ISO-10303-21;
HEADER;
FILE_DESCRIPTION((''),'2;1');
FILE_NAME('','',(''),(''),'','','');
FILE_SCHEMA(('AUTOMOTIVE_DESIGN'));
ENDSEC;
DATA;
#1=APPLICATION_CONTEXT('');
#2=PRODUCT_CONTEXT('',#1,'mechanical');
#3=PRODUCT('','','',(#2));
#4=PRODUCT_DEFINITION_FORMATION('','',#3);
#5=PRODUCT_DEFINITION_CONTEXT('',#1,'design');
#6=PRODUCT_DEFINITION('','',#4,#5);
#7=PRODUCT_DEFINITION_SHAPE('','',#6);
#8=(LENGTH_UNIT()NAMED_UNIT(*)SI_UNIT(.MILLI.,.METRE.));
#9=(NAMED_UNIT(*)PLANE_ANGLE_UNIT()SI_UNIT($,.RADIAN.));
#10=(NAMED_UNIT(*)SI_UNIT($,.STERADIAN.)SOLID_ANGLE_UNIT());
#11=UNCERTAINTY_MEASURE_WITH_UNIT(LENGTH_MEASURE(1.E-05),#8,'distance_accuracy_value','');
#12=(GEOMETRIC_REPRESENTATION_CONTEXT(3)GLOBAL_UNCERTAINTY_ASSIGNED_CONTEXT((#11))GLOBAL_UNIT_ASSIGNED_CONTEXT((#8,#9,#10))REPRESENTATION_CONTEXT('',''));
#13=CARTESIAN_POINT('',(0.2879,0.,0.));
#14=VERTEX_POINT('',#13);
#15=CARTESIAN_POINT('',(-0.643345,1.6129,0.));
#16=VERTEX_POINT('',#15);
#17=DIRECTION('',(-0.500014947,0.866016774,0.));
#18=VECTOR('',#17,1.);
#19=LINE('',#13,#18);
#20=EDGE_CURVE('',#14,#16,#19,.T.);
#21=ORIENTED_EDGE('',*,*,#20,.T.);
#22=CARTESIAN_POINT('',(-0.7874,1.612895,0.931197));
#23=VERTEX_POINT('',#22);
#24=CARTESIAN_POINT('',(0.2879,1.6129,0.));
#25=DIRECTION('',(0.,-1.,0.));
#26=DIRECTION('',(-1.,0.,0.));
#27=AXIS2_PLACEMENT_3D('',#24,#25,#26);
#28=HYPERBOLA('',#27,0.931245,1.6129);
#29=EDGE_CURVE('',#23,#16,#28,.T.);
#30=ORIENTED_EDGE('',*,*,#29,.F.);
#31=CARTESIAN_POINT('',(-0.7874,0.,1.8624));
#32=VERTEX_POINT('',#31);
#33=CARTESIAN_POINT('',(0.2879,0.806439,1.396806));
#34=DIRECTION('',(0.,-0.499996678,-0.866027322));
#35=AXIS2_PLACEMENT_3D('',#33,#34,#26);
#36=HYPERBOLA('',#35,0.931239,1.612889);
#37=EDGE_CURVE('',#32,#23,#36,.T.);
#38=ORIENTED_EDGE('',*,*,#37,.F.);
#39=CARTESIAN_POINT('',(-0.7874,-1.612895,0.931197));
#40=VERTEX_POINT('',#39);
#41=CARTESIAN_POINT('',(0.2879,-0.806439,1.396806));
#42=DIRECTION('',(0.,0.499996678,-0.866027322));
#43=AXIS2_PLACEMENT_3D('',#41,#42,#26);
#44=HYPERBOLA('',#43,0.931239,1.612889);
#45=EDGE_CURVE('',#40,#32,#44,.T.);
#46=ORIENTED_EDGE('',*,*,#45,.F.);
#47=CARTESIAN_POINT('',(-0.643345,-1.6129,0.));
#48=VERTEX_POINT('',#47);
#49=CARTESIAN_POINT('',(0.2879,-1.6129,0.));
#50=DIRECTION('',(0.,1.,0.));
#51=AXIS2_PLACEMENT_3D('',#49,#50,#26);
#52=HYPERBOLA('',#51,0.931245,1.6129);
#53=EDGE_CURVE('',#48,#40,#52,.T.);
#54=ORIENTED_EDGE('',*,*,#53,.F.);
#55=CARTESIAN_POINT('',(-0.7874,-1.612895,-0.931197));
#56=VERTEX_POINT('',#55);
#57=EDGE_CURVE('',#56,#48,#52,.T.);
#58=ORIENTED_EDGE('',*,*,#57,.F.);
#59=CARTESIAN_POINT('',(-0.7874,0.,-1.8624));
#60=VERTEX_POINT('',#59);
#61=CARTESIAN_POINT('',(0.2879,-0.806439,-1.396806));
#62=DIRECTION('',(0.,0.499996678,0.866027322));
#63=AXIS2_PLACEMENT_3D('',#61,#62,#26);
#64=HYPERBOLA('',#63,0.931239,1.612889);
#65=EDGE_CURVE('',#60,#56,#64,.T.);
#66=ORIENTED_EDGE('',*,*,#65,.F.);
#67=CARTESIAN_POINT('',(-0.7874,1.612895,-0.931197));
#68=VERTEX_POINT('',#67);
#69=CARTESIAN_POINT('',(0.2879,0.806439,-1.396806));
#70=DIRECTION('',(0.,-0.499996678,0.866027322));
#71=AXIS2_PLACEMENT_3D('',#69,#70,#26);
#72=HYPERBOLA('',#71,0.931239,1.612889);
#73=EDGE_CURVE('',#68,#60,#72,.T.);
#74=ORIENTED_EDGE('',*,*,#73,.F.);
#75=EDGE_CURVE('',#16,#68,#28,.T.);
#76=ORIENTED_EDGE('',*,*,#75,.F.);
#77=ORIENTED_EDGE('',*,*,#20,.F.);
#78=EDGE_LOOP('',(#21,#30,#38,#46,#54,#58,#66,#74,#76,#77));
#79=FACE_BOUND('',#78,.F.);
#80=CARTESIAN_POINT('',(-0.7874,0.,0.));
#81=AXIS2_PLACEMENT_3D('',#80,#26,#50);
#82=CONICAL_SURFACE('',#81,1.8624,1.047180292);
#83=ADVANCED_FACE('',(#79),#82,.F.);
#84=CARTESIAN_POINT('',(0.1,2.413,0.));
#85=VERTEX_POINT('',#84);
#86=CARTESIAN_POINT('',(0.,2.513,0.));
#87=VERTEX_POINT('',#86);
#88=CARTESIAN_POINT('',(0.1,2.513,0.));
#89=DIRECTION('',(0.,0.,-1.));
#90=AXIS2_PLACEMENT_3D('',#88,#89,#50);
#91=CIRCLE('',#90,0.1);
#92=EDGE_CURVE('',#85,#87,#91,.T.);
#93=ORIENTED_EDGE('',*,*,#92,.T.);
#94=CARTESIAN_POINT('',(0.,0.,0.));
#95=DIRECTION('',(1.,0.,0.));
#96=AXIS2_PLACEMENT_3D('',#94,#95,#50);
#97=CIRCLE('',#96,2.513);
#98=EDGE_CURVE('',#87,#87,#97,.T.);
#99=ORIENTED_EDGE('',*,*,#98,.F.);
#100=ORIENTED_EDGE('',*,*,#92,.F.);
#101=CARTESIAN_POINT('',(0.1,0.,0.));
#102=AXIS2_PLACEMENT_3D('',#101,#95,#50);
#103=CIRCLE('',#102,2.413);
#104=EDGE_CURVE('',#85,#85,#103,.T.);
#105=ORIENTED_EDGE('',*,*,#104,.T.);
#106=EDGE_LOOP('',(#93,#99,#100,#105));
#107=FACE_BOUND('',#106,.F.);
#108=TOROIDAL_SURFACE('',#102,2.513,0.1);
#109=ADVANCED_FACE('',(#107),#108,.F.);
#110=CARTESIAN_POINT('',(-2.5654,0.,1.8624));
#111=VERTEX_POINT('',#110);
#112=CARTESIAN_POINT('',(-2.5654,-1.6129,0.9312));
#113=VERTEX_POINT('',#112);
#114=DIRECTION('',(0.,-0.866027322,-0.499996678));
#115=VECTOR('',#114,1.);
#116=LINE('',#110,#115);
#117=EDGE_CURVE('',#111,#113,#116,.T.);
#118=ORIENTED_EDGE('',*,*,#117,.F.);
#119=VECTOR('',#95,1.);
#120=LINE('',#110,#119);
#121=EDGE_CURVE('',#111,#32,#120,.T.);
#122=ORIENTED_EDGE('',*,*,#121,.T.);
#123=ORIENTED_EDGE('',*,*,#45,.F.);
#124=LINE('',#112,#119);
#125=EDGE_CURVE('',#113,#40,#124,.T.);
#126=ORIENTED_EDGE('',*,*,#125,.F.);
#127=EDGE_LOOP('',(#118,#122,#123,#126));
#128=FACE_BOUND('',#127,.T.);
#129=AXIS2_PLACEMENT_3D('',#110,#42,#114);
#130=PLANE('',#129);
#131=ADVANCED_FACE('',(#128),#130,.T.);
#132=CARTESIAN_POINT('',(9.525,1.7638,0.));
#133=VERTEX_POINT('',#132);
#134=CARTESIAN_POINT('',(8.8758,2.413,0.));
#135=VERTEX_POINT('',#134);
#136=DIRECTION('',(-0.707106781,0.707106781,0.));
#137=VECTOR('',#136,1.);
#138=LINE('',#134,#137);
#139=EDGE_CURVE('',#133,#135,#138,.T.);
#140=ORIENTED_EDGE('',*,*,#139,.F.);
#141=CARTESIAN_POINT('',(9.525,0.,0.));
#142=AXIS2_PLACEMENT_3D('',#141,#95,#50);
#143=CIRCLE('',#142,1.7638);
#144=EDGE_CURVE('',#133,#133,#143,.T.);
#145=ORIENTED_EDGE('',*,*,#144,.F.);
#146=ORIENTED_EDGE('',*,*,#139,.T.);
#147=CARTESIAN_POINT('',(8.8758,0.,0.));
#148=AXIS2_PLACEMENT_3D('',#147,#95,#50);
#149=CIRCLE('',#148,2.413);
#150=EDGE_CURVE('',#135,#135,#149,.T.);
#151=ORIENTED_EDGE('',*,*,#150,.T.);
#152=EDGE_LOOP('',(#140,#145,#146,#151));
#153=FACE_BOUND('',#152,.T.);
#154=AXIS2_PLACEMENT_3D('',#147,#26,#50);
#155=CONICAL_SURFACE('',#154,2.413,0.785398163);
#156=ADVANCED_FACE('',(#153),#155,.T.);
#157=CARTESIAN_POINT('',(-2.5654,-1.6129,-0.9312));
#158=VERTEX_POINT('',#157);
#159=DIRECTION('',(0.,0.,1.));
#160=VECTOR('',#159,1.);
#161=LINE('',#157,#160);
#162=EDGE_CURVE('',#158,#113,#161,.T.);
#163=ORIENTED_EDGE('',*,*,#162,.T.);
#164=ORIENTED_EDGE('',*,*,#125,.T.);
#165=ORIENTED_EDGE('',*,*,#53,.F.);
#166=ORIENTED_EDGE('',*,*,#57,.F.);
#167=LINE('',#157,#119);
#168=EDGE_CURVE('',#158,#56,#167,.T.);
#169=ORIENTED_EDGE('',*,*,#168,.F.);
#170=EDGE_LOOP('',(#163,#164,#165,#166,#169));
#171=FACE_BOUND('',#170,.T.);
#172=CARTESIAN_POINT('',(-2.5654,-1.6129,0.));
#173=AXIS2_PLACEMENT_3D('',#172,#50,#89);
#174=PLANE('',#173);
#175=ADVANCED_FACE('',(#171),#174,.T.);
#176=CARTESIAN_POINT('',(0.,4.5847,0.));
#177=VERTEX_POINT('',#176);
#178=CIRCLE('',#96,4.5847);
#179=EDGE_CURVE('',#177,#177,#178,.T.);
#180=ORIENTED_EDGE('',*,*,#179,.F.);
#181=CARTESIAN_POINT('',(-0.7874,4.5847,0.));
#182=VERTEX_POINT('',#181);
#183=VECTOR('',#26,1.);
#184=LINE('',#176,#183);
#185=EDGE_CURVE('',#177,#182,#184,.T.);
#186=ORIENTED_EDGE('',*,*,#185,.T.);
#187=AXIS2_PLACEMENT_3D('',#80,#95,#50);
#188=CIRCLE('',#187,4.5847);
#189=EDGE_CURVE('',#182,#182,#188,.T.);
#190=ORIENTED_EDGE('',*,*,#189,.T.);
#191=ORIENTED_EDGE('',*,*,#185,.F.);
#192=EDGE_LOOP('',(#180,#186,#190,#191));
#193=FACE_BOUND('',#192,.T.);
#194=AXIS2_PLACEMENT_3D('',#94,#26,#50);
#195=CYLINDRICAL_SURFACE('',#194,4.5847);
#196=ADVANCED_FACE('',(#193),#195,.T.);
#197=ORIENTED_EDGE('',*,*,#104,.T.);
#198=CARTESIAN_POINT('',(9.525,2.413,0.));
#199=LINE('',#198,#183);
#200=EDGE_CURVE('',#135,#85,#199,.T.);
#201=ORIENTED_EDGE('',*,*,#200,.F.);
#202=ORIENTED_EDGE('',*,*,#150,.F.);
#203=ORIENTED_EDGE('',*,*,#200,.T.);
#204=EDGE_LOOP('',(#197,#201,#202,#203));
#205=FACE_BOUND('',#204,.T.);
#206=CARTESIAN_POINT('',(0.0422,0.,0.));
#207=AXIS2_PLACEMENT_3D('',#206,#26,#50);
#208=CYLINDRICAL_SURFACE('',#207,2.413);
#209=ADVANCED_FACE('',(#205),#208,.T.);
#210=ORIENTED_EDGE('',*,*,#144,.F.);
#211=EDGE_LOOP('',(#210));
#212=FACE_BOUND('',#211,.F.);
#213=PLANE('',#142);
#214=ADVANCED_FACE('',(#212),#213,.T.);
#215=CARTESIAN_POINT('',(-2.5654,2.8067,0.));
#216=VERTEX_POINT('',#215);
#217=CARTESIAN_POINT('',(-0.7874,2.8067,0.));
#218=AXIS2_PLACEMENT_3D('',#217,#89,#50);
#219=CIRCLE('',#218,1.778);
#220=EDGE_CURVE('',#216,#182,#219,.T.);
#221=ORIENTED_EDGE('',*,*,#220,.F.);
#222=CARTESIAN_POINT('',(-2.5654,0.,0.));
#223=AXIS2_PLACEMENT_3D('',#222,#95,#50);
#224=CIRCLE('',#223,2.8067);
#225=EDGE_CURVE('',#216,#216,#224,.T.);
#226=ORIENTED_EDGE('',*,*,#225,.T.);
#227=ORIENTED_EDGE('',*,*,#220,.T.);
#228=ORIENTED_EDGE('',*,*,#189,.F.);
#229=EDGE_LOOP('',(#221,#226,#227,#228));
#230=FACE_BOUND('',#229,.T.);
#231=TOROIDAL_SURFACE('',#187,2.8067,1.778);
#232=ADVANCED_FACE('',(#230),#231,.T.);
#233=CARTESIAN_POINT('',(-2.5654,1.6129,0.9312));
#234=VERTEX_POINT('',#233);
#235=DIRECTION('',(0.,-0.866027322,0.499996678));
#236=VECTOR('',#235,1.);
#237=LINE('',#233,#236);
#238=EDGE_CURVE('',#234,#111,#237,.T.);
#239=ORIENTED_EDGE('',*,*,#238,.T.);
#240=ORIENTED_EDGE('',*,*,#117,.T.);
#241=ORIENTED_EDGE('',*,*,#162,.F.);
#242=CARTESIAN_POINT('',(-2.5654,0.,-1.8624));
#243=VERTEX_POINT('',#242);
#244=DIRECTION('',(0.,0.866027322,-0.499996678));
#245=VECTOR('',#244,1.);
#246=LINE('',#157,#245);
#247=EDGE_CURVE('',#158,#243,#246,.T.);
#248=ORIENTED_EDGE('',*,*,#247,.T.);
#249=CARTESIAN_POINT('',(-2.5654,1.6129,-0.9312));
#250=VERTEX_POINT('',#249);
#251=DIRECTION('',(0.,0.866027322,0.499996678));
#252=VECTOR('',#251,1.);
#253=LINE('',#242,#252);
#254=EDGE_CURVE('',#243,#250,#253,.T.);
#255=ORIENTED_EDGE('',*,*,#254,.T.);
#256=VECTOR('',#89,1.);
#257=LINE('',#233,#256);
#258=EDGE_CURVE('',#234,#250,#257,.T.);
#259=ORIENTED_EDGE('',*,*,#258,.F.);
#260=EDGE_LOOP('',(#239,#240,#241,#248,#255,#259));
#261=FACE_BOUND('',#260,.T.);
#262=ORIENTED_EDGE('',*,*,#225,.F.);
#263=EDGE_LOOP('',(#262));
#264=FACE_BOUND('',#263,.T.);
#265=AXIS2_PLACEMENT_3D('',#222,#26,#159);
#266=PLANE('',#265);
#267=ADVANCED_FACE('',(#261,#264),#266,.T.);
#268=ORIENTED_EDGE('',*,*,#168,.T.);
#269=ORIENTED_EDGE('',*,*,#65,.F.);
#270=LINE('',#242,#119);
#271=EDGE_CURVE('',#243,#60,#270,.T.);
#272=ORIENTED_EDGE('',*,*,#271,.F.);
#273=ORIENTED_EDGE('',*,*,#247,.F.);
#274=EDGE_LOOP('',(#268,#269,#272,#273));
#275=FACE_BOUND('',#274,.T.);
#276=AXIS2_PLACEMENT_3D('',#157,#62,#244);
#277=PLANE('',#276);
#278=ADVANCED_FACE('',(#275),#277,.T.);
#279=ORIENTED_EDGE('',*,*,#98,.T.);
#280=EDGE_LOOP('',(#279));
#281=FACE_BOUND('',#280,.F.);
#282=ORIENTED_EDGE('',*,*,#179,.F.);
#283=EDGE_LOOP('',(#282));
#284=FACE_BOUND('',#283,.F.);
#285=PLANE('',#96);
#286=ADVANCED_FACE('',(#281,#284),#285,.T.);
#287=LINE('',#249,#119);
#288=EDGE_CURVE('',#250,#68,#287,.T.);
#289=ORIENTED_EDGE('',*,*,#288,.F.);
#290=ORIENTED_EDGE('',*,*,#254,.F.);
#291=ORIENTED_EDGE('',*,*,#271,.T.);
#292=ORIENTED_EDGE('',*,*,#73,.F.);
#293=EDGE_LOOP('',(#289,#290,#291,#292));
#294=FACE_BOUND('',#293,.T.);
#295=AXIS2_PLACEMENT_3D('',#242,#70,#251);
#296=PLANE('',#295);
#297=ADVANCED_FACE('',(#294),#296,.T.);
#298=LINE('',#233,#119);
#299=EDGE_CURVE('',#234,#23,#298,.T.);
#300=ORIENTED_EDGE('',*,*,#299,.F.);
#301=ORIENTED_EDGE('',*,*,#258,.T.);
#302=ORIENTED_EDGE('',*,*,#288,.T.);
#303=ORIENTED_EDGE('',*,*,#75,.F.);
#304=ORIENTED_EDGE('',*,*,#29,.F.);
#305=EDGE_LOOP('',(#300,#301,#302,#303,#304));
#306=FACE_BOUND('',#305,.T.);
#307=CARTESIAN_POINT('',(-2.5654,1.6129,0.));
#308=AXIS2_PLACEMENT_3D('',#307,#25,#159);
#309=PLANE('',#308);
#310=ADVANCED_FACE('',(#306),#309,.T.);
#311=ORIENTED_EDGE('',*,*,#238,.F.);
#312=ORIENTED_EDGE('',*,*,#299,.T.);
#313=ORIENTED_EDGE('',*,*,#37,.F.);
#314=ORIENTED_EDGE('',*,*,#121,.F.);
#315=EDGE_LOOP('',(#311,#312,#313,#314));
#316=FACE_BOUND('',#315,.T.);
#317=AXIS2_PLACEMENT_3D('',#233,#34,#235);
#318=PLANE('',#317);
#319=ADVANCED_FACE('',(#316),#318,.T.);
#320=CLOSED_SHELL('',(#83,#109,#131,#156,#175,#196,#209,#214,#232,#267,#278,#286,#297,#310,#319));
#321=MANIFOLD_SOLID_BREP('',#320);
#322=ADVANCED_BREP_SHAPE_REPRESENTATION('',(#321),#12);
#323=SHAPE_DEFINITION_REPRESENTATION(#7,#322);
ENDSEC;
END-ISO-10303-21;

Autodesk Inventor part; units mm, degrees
ref_plane "YZ Plane" through (0, 0, 0) normal (1, 0, 0) x (0, 1, 0)
ref_plane "XZ Plane" through (0, 0, 0) normal (0, 1, 0) x (-1, 0, 0)
sketch "Sketch1" plane through (0, 0, 0) normal (0, 0, 1) x (1, 0, 0)
  line L0 (0.2879, 0) -> (9.525, 0)
  line L1 (9.525, 0) -> (9.525, 2.413)
  line L2 (9.525, 2.413) -> (2.159, 2.413)
  line L3 (2.159, 2.413) -> (0.0422, 2.413)
  line L4 (0.0422, 2.413) -> (0, 2.413)
  line L5 (0, 2.413) -> (0, 4.5847)
  line L6 (0, 4.5847) -> (-2.5654, 4.5847)
  line L7 (-2.5654, 4.5847) -> (-2.5654, 1.8624)
  line L8 (-2.5654, 1.8624) -> (-0.7874, 1.8624)
  line L9 (-0.7874, 1.8624) -> (0.2879, 0)
  line L10 (-4.9835, 0) -> (11.9431, 0) projected
  line L11 (0, -0.9169) -> (0, 5.5016) projected
  line L12 (2.159, 2.413) -> (0, 2.413) construction
  dimension "d1" = 7.366
  dimension "d2" = 2.1168
  dimension "d3" = 2.5654
  dimension "d4" = 1.778
  dimension "d5" = 60
  dimension "d6" = 4.826
  dimension "d7" = 4.826
  dimension "d8" = 3.7248
  dimension "d9" = 9.1694
  dimension "d26" = 9.525
revolve "Body" add sketch "Sketch1" angle 360 about axis through (0.2879, 0, 0) along (1, 0, 0) contours L9 L11 L4 L3 L2 L1 L0 | L9 L8 L7 L6 L5 L11
sketch "Sketch2" plane through (-2.5654, 0, 0) normal (-1, 0, 0) x (0, 0, 1)
  circle A0 centre (0, 0) radius 1.8624 projected
  line L0 (0, -6.4186) -> (0, 6.4186) projected
  line L1 (-6.4186, 0) -> (6.4186, 0) projected
  line L2 (1.8624, 0) -> (0.9312, -1.6129)
  line L3 (0.9312, -1.6129) -> (-0.9312, -1.6129)
  line L4 (-0.9312, -1.6129) -> (-1.8624, 0)
  line L5 (-1.8624, 0) -> (-0.9312, 1.6129)
  line L6 (-0.9312, 1.6129) -> (0.9312, 1.6129)
  line L7 (0.9312, 1.6129) -> (1.8624, 0)
extrude "Slot" add sketch "Sketch2" against normal up to next contours L7 A0 | A0 L2 | L6 L0 A0 | A0 L0 L3 | L0 L6 A0 | A0 L3 L0 | L4 A0 | A0 L5
fillet "Fillet1" radius 1.778 1 edges at (-2.5654, -4.5847, 0)
thread "Thread" size "10-24 UNC" class "2A" standard "ANSI Unified Screw Threads" length 7.366
chamfer "Chamfer1" distance 0.6492 distance2 0.6492 1 edges at (9.525, -2.413, 0) measured on face at (9.525, -0.2686, 0.7084)
ref_plane "Work Plane1" through (29, 0, 0) normal (0, -1, 0) x (1, 0, 0)
fillet "Fillet2" radius 0.1 1 edges at (0, -2.413, 0)
equation "\"d30\" = R"
equation "\"d17\" = RR"
equation "\"d13\" = GEL"
equation "\"d15\" = -0.5 * SPD + 0.5 * GD"
equation "\"d16\" = GUL"
equation "\"d1\" = GEL"
equation "\"d3\" = KOH"
equation "\"d4\" = INTI"
equation "\"d6\" = GD"
equation "\"d7\" = BDM"
equation "\"d8\" = 1.1547 * SW"
equation "\"d9\" = KOD"
equation "\"d26\" = NLG"
equation "\"GD\" = NND"
equation "\"NLG\" = 9.525"
equation "\"GEL\" = 7.366"
equation "\"KOD\" = 9.1694"
equation "\"KOH\" = 2.5654"
equation "\"INTI\" = 1.778"
equation "\"GAL\" = 2.11668"
equation "\"GUL\" = 0.64922"
equation "\"BDM\" = NND"
equation "\"SW\" = 3.2258"
equation "\"RR\" = 1.778"
equation "\"SPD\" = GD1"
equation "\"R\" = 0.1"
equation "\"KR\" = 5.4102"
equation "\"GD1\" = 3.52755"
equation "\"THREADDIA\" = 4.826"
equation "\"FAWI\" = 45deg"
equation "\"KOH1\" = 1.778"
equation "\"NND\" = 4.826"
equation "\"TOA\" = 30deg"
equation "\"E0\" = 1.155 * SW"
properties part number "Unbrako - 10 x 3/8" material "Steel, Mild"
